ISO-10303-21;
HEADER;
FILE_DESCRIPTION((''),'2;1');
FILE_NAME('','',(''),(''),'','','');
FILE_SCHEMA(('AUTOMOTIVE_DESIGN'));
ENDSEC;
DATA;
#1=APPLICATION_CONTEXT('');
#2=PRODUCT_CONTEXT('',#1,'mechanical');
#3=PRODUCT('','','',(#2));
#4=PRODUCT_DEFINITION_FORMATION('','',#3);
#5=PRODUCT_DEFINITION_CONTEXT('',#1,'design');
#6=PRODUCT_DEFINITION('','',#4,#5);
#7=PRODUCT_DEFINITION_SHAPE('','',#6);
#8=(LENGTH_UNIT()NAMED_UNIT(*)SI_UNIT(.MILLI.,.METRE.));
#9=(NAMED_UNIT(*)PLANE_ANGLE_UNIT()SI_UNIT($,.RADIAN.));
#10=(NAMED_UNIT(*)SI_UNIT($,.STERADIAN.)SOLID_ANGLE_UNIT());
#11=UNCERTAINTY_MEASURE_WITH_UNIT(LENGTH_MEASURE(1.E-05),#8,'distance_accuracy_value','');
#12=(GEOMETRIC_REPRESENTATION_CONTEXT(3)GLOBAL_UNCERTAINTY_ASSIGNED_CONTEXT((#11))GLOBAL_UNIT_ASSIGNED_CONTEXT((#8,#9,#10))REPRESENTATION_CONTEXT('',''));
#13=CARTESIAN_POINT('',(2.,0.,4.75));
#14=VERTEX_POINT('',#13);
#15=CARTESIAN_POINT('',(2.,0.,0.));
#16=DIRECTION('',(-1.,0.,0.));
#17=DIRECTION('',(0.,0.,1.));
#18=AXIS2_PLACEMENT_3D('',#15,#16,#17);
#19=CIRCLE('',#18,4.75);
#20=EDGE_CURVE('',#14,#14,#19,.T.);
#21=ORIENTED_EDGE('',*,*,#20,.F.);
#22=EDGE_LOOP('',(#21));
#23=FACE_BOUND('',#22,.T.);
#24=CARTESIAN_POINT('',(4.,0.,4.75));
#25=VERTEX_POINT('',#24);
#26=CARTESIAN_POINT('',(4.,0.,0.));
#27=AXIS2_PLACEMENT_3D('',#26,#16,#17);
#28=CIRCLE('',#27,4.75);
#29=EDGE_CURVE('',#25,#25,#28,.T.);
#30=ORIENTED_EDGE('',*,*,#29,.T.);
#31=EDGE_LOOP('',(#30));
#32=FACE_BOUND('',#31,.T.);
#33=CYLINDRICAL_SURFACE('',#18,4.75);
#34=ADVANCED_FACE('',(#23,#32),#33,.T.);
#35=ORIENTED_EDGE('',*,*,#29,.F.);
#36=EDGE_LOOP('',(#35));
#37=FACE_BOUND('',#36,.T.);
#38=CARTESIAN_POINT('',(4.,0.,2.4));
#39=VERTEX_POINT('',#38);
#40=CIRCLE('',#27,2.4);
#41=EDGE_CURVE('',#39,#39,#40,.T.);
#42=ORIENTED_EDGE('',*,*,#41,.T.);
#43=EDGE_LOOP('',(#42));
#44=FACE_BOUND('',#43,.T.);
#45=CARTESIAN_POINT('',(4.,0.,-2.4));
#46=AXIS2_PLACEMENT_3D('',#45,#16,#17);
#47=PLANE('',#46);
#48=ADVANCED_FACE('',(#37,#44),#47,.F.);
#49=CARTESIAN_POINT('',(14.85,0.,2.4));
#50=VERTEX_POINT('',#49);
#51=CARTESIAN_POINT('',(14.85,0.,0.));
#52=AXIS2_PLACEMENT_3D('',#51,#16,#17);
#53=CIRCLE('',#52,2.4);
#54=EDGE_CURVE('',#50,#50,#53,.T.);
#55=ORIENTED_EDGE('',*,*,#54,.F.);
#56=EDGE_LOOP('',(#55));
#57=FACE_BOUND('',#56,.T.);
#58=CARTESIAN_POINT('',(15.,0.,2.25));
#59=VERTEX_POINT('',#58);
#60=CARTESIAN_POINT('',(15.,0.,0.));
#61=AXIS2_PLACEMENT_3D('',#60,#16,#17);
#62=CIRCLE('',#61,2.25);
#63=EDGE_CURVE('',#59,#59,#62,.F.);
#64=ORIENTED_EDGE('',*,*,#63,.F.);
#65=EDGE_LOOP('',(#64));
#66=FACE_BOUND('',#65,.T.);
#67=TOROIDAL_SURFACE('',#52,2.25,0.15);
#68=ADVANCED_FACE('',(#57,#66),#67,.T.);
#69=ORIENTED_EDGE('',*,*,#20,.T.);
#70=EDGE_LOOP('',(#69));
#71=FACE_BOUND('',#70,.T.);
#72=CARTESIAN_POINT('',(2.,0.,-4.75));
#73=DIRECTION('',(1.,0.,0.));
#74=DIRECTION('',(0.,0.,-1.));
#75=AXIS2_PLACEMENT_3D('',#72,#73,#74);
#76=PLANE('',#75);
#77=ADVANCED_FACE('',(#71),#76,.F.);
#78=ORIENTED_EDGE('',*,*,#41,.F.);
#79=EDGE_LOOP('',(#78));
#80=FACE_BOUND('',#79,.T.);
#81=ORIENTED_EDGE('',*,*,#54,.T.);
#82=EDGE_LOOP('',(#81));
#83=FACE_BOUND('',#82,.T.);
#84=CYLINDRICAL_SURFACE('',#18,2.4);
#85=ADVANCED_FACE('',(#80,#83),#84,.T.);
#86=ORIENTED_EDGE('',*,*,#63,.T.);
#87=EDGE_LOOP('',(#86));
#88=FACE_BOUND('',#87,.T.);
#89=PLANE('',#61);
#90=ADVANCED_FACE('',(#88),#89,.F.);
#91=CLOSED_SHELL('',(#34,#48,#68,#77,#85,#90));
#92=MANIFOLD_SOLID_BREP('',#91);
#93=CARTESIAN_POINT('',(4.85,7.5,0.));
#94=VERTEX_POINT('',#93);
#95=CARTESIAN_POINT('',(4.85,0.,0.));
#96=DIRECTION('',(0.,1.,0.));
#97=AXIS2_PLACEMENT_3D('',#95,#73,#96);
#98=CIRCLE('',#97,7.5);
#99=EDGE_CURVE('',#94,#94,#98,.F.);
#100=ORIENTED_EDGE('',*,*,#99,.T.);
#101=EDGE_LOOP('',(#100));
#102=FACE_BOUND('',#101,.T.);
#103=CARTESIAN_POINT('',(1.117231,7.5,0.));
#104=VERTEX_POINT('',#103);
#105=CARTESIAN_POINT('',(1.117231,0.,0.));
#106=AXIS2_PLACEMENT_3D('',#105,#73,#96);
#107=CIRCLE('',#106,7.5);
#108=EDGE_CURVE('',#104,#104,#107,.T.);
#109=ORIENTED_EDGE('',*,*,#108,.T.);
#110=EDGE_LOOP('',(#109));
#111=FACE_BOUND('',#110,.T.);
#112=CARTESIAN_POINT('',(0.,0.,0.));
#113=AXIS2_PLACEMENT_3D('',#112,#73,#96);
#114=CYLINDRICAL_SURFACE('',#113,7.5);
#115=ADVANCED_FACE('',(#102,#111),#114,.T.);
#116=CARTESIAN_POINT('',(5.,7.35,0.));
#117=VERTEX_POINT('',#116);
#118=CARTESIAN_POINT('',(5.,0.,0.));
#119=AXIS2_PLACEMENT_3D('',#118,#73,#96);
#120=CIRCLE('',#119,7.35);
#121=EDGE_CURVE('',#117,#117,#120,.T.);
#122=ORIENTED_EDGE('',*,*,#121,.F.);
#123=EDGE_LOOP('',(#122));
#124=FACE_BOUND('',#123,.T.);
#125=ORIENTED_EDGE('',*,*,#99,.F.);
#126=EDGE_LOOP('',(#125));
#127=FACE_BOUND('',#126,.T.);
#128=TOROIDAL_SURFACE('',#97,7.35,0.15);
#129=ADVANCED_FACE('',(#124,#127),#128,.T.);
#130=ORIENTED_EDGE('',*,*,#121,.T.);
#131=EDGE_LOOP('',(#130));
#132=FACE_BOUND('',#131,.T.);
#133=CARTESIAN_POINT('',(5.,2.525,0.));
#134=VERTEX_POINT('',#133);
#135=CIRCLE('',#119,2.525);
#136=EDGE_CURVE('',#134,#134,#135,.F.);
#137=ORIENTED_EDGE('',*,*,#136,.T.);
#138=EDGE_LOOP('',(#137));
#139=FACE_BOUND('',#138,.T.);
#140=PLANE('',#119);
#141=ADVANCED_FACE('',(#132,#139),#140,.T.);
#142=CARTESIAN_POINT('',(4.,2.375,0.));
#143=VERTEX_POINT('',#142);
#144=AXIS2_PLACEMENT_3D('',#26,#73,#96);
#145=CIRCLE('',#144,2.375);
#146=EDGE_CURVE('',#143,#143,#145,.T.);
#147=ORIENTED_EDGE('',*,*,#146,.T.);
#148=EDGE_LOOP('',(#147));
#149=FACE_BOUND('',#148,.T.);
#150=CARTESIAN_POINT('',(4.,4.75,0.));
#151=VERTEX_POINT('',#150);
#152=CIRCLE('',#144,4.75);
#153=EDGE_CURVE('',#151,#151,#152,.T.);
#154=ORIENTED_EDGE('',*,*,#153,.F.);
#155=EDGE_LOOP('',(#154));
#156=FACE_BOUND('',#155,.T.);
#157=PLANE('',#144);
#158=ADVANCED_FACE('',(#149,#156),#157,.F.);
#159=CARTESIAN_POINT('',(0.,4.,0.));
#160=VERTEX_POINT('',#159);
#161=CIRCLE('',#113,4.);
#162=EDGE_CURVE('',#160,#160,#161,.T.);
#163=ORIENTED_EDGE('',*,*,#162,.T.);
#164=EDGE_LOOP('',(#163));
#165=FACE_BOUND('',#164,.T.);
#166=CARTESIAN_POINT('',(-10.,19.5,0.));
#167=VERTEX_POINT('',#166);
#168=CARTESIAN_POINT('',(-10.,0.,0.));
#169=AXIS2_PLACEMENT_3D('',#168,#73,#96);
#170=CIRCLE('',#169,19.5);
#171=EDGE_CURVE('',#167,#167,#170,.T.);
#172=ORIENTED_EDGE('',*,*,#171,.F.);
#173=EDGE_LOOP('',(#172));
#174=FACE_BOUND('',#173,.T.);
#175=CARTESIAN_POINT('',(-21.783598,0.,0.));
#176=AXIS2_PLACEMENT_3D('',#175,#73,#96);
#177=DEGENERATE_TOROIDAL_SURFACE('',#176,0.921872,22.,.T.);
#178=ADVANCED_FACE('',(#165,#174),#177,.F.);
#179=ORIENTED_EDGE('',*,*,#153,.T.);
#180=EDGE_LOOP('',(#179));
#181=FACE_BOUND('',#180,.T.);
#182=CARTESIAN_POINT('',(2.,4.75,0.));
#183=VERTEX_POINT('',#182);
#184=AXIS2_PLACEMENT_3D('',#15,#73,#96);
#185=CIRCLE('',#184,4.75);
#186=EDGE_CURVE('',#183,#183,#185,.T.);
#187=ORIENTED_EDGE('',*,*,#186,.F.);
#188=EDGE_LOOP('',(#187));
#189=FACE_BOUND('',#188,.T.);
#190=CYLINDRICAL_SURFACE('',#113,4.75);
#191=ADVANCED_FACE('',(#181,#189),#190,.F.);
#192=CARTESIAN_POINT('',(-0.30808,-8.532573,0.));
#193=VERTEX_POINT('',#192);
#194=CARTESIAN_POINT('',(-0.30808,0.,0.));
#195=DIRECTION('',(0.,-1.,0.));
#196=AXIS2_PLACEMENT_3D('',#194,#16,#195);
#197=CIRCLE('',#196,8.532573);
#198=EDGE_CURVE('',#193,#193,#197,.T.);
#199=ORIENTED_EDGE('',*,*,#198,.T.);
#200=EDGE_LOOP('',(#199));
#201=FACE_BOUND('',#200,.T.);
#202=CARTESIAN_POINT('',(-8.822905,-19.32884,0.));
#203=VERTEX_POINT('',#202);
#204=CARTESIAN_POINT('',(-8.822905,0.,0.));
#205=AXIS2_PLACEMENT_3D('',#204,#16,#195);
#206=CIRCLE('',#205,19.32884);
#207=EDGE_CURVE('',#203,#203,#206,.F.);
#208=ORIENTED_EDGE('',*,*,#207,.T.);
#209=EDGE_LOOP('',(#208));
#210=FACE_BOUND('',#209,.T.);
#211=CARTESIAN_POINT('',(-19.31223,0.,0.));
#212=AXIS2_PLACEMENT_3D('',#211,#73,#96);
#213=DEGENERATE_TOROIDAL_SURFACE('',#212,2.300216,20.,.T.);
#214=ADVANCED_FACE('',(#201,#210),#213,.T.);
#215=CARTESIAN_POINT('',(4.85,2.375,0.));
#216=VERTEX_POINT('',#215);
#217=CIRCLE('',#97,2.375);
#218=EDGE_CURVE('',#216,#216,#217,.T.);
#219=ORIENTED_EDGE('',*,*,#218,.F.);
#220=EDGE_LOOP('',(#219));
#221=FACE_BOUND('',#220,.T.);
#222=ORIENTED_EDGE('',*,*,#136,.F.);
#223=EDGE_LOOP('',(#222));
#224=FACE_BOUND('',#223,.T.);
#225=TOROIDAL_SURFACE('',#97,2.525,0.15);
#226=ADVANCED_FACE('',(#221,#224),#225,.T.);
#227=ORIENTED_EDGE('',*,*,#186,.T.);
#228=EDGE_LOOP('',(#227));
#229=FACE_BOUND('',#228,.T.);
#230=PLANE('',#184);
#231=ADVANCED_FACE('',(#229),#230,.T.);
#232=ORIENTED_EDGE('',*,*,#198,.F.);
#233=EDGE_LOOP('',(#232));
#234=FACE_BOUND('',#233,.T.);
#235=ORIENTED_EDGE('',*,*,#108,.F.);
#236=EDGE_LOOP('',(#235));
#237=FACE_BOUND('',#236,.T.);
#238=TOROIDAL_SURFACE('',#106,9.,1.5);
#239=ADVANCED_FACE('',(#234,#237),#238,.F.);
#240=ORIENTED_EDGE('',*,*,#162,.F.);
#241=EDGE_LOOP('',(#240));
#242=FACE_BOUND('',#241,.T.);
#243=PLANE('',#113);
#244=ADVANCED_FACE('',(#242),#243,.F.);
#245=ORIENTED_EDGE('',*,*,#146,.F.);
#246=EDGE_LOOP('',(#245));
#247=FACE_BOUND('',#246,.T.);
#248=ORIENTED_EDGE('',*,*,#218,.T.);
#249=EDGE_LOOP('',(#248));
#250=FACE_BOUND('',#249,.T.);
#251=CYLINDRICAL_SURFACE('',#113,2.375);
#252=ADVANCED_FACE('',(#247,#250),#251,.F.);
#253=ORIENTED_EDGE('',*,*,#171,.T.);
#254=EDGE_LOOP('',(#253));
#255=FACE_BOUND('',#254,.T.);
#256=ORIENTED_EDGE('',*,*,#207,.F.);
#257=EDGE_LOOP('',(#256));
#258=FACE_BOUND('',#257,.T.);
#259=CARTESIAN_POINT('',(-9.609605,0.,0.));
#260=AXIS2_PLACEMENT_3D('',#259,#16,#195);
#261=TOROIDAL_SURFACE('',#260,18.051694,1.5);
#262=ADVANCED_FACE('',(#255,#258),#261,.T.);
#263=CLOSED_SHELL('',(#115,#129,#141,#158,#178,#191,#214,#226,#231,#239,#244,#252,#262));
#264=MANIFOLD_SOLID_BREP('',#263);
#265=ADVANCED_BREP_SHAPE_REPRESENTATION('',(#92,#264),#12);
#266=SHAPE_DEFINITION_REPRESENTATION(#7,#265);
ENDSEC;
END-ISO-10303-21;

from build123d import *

# Parameters (mm, degrees)
FILLET1_R = 0.15
FILLET2_R = 0.15
FILLET3_R = 1.5
FILLET4_R = 0.15


with BuildPart() as part:
    # Sketch1 → Revolve1 (revolve)
    with BuildSketch(Plane.XY):
        with BuildLine():
            Line((0, 4.000000000000002), (0, 0))
            Line((0, 0), (2, 0))
            Line((2, 0), (2, 4.75))
            Line((2, 4.75), (4, 4.75))
            Line((4, 4.75), (4, 2.375))
            Line((4, 2.375), (5, 2.375))
            Line((5, 2.375), (5, 7.499999999999999))
            Line((5, 7.499999999999999), (0, 7.5))
            ThreePointArc((3.55e-15, 7.499999999999998), (-3.6948542111989937, 14.794116631040804), (-10, 20.000000000000004))
            Line((-10, 20), (-10, 19.5))
            ThreePointArc((-9.999999999999995, 19.500000000000004), (-3.297071481987519, 12.848663560008053), (7.11e-15, 4.000000000000002))
        make_face()
    revolve(axis=Axis((0, 0, 0), (-1, -1.2e-16, 0)))

    # Fillet1
    fillet1_edges = [part.edges().sort_by_distance(p)[0] for p in [
        (5.000000000000002, -7.499999999999997, -9.2e-16),
    ]]
    fillet(fillet1_edges, radius=FILLET1_R)

    # Fillet2
    fillet2_edges = [part.edges().sort_by_distance(p)[0] for p in [
        (5, -2.374999999999999, -2.9e-16),
    ]]
    fillet(fillet2_edges, radius=FILLET2_R)

    # Fillet3
    # the kernel refuses this fillet: 1.5 mm, written as the material it adds along each edge
    with BuildSketch(Plane(origin=(2.69e-15, 0, 0), x_dir=(-1.2e-16, 1, 0), z_dir=(0, 0, 1))) as fillet3_piece_1:
        with BuildLine():
            CenterArc((8.999999999999998, -1.117230925801226), FILLET3_R, 108.1567582497087, 71.84324175029133)
            ThreePointArc((8.532573186973416, 0.3080803294913892), (8.018361800934953, 0.14708482432521733), (7.499999999999998, 0))
            Line((7.499999999999998, 0), (7.499999999999998, -1.117230925801226))
        make_face()
    revolve(axis=Axis((2.69e-15, 0, 0), (-1, -1.2e-16, 0)))
    # the kernel refuses this fillet: 1.5 mm, written as the material it takes off along each edge
    with BuildSketch(Plane(origin=(-9.999999999999998, -1.22e-15, 0), x_dir=(-9e-17, 1, 0), z_dir=(0, 0, 1))) as fillet3_2_piece_1:
        with BuildLine():
            CenterArc((18.05169355974905, -0.3903952550027688), FILLET3_R, 328.36768147729936, 46.71801659257376)
            Line((19.499999999999662, -9.233e-14), (20, 1.78e-15))
            ThreePointArc((20, 1.78e-15), (19.67439153999357, -0.5942328025349539), (19.328840414867702, -1.1770946324402587))
        make_face()
    revolve(axis=Axis((-9.999999999999998, -1.22e-15, 0), (-1, -1.2e-16, 0)), mode=Mode.SUBTRACT)


with BuildPart() as body_2:
    # Sketch2 → Revolve2 (revolve)
    with BuildSketch(Plane(origin=(0, 0, 0), x_dir=(1, 0, 0), z_dir=(0, 1, 0)), mode=Mode.PRIVATE) as revolve2_sk:
        Polygon((2.0000000000000004, 4.7499999999999964), (2.0000000000000004, 0), (15.000000000000004, 2.41e-15), (15.000000000000004, 2.4), (4.000000000000001, 2.399999999999996), (4.000000000000001, 4.7499999999999964), align=None)
    revolve(revolve2_sk.sketch.rotate(Axis((2.0000000000000004, 0, 0), (1, 0, -1.9e-16)), 180), axis=Axis((2.0000000000000004, 0, 0), (1, 0, -1.9e-16)))

    # Fillet4
    fillet4_edges = [body_2.edges().sort_by_distance(p)[0] for p in [
        (15.000000000000005, -5.9e-16, -2.3999999999999995),
    ]]
    fillet(fillet4_edges, radius=FILLET4_R)


solid = Compound([part.part, body_2.part])
